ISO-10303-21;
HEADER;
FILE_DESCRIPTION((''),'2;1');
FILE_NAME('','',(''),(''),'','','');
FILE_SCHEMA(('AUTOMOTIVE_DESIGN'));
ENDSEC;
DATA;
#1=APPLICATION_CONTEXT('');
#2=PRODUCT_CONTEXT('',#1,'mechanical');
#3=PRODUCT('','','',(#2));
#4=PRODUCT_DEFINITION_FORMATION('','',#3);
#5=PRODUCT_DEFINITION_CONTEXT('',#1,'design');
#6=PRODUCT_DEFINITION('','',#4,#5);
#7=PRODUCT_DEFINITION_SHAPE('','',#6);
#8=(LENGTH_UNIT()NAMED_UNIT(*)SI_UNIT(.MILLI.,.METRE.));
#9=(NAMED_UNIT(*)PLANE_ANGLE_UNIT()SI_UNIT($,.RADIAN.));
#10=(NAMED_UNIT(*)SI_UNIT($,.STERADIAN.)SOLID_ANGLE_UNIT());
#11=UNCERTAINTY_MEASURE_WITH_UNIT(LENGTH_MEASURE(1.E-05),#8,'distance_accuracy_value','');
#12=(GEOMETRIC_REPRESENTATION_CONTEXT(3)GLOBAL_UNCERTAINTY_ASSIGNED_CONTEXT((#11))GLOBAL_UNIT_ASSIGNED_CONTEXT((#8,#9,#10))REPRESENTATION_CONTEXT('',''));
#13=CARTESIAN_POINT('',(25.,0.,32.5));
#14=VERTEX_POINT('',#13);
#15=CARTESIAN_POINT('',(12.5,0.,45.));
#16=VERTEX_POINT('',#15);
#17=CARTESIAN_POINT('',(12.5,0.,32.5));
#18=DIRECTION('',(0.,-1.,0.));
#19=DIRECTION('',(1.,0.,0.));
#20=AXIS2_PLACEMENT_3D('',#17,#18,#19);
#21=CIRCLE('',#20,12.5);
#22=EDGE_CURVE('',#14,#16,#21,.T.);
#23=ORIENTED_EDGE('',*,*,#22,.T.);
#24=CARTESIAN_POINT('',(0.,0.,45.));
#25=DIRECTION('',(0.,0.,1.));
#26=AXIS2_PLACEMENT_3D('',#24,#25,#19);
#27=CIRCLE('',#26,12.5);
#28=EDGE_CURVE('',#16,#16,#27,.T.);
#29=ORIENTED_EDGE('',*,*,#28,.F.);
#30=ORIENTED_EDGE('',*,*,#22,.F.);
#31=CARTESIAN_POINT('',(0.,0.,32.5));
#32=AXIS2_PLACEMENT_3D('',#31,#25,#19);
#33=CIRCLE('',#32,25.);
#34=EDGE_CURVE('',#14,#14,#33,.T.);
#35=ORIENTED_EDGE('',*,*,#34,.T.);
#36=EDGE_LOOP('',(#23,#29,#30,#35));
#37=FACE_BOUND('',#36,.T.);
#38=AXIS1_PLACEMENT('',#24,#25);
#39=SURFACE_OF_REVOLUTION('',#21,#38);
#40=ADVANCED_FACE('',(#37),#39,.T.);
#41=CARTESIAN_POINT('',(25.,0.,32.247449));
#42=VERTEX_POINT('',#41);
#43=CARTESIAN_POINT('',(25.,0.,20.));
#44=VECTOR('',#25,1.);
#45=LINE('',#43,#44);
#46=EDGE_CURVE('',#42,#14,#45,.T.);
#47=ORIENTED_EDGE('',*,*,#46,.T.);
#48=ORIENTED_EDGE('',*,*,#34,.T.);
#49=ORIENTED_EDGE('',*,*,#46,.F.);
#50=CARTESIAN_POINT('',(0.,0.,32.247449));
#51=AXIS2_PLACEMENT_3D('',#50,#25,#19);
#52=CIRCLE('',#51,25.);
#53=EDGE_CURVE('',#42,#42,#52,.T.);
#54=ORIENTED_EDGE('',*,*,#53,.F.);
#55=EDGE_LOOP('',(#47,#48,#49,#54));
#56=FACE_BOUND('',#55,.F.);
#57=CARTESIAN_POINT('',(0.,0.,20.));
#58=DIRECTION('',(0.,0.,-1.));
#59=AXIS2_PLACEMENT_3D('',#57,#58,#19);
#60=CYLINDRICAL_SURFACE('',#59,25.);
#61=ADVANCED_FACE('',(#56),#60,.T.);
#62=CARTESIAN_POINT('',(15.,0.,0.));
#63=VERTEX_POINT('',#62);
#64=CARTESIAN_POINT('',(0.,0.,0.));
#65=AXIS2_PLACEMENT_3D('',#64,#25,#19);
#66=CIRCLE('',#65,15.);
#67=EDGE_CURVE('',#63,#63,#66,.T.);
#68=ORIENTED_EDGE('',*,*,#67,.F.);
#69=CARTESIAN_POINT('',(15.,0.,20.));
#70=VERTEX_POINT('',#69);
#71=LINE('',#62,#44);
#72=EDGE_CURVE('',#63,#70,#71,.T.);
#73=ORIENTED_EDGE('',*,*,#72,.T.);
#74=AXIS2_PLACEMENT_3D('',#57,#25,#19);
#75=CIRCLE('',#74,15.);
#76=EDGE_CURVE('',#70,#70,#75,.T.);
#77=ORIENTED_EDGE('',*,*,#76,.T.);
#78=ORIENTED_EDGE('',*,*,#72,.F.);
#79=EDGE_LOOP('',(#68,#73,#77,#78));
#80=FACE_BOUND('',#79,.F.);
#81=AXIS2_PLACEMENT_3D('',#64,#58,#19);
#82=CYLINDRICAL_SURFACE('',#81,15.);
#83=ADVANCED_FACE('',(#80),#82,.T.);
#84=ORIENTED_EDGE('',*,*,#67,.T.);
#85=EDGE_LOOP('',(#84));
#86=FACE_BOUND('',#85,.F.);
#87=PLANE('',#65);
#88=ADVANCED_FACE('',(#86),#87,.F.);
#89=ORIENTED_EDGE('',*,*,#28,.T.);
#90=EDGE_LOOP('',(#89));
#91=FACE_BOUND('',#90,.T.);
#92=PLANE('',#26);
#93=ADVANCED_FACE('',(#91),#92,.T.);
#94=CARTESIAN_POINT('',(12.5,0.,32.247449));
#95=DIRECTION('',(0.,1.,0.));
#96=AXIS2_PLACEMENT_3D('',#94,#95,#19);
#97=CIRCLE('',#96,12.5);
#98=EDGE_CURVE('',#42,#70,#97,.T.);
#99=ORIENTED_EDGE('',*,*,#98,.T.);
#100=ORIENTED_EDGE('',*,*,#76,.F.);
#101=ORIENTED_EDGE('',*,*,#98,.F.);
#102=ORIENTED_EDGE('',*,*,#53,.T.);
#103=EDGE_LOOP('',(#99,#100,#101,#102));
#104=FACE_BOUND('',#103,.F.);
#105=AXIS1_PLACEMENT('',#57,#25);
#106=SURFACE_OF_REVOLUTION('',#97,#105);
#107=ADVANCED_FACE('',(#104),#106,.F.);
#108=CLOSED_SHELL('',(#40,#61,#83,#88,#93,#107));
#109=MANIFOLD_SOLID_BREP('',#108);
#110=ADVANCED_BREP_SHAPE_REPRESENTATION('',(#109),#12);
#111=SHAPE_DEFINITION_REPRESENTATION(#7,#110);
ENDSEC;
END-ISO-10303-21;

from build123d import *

# Parameters (mm, degrees)
F0_R     = 15
F1_DEPTH = 20
F2_R     = 25
F3_DEPTH = 25


# Not quite as in the source:
# - a fillet or chamfer that OpenCascade refuses, or shapes differently, is made with other operations: its cross-section is extruded or revolved along the edge and cut away or added


with BuildPart() as f1:
    # F0 (on Top) → F1 (new body)
    with BuildSketch(Plane.XY):
        Circle(F0_R)
    extrude(amount=F1_DEPTH)

    # F2 (on face) → F3 (join)
    with BuildSketch(Plane.XY.offset(20)):
        Circle(F2_R)
    extrude(amount=F3_DEPTH)

    # F4: fillet of radius 12.5 on 2 edges, made by hand

    # F4_s1 → F4_t2 (revolve, cut)
    with BuildSketch(Plane.XZ):
        with BuildLine():
            ThreePointArc((25, 32.5), (21.3388347648, 41.3388347648), (12.5, 45))
            Line((12.5, 45), (25, 45))
            Line((25, 45), (25, 32.5))
        make_face()
    revolve(axis=Axis((0, 0, 45), (0, 0, 1)), mode=Mode.SUBTRACT)

    # F4_s3 → F4_t4 (revolve, cut)
    with BuildSketch(Plane.XZ):
        with BuildLine():
            ThreePointArc((25, 32.2474487139), (22.1824583655, 24.3417545635), (15, 20))
            Line((15, 20), (25, 20))
            Line((25, 20), (25, 32.2474487139))
        make_face()
    revolve(axis=Axis((0, 0, 20), (0, 0, 1)), mode=Mode.SUBTRACT)


solid = f1.part
